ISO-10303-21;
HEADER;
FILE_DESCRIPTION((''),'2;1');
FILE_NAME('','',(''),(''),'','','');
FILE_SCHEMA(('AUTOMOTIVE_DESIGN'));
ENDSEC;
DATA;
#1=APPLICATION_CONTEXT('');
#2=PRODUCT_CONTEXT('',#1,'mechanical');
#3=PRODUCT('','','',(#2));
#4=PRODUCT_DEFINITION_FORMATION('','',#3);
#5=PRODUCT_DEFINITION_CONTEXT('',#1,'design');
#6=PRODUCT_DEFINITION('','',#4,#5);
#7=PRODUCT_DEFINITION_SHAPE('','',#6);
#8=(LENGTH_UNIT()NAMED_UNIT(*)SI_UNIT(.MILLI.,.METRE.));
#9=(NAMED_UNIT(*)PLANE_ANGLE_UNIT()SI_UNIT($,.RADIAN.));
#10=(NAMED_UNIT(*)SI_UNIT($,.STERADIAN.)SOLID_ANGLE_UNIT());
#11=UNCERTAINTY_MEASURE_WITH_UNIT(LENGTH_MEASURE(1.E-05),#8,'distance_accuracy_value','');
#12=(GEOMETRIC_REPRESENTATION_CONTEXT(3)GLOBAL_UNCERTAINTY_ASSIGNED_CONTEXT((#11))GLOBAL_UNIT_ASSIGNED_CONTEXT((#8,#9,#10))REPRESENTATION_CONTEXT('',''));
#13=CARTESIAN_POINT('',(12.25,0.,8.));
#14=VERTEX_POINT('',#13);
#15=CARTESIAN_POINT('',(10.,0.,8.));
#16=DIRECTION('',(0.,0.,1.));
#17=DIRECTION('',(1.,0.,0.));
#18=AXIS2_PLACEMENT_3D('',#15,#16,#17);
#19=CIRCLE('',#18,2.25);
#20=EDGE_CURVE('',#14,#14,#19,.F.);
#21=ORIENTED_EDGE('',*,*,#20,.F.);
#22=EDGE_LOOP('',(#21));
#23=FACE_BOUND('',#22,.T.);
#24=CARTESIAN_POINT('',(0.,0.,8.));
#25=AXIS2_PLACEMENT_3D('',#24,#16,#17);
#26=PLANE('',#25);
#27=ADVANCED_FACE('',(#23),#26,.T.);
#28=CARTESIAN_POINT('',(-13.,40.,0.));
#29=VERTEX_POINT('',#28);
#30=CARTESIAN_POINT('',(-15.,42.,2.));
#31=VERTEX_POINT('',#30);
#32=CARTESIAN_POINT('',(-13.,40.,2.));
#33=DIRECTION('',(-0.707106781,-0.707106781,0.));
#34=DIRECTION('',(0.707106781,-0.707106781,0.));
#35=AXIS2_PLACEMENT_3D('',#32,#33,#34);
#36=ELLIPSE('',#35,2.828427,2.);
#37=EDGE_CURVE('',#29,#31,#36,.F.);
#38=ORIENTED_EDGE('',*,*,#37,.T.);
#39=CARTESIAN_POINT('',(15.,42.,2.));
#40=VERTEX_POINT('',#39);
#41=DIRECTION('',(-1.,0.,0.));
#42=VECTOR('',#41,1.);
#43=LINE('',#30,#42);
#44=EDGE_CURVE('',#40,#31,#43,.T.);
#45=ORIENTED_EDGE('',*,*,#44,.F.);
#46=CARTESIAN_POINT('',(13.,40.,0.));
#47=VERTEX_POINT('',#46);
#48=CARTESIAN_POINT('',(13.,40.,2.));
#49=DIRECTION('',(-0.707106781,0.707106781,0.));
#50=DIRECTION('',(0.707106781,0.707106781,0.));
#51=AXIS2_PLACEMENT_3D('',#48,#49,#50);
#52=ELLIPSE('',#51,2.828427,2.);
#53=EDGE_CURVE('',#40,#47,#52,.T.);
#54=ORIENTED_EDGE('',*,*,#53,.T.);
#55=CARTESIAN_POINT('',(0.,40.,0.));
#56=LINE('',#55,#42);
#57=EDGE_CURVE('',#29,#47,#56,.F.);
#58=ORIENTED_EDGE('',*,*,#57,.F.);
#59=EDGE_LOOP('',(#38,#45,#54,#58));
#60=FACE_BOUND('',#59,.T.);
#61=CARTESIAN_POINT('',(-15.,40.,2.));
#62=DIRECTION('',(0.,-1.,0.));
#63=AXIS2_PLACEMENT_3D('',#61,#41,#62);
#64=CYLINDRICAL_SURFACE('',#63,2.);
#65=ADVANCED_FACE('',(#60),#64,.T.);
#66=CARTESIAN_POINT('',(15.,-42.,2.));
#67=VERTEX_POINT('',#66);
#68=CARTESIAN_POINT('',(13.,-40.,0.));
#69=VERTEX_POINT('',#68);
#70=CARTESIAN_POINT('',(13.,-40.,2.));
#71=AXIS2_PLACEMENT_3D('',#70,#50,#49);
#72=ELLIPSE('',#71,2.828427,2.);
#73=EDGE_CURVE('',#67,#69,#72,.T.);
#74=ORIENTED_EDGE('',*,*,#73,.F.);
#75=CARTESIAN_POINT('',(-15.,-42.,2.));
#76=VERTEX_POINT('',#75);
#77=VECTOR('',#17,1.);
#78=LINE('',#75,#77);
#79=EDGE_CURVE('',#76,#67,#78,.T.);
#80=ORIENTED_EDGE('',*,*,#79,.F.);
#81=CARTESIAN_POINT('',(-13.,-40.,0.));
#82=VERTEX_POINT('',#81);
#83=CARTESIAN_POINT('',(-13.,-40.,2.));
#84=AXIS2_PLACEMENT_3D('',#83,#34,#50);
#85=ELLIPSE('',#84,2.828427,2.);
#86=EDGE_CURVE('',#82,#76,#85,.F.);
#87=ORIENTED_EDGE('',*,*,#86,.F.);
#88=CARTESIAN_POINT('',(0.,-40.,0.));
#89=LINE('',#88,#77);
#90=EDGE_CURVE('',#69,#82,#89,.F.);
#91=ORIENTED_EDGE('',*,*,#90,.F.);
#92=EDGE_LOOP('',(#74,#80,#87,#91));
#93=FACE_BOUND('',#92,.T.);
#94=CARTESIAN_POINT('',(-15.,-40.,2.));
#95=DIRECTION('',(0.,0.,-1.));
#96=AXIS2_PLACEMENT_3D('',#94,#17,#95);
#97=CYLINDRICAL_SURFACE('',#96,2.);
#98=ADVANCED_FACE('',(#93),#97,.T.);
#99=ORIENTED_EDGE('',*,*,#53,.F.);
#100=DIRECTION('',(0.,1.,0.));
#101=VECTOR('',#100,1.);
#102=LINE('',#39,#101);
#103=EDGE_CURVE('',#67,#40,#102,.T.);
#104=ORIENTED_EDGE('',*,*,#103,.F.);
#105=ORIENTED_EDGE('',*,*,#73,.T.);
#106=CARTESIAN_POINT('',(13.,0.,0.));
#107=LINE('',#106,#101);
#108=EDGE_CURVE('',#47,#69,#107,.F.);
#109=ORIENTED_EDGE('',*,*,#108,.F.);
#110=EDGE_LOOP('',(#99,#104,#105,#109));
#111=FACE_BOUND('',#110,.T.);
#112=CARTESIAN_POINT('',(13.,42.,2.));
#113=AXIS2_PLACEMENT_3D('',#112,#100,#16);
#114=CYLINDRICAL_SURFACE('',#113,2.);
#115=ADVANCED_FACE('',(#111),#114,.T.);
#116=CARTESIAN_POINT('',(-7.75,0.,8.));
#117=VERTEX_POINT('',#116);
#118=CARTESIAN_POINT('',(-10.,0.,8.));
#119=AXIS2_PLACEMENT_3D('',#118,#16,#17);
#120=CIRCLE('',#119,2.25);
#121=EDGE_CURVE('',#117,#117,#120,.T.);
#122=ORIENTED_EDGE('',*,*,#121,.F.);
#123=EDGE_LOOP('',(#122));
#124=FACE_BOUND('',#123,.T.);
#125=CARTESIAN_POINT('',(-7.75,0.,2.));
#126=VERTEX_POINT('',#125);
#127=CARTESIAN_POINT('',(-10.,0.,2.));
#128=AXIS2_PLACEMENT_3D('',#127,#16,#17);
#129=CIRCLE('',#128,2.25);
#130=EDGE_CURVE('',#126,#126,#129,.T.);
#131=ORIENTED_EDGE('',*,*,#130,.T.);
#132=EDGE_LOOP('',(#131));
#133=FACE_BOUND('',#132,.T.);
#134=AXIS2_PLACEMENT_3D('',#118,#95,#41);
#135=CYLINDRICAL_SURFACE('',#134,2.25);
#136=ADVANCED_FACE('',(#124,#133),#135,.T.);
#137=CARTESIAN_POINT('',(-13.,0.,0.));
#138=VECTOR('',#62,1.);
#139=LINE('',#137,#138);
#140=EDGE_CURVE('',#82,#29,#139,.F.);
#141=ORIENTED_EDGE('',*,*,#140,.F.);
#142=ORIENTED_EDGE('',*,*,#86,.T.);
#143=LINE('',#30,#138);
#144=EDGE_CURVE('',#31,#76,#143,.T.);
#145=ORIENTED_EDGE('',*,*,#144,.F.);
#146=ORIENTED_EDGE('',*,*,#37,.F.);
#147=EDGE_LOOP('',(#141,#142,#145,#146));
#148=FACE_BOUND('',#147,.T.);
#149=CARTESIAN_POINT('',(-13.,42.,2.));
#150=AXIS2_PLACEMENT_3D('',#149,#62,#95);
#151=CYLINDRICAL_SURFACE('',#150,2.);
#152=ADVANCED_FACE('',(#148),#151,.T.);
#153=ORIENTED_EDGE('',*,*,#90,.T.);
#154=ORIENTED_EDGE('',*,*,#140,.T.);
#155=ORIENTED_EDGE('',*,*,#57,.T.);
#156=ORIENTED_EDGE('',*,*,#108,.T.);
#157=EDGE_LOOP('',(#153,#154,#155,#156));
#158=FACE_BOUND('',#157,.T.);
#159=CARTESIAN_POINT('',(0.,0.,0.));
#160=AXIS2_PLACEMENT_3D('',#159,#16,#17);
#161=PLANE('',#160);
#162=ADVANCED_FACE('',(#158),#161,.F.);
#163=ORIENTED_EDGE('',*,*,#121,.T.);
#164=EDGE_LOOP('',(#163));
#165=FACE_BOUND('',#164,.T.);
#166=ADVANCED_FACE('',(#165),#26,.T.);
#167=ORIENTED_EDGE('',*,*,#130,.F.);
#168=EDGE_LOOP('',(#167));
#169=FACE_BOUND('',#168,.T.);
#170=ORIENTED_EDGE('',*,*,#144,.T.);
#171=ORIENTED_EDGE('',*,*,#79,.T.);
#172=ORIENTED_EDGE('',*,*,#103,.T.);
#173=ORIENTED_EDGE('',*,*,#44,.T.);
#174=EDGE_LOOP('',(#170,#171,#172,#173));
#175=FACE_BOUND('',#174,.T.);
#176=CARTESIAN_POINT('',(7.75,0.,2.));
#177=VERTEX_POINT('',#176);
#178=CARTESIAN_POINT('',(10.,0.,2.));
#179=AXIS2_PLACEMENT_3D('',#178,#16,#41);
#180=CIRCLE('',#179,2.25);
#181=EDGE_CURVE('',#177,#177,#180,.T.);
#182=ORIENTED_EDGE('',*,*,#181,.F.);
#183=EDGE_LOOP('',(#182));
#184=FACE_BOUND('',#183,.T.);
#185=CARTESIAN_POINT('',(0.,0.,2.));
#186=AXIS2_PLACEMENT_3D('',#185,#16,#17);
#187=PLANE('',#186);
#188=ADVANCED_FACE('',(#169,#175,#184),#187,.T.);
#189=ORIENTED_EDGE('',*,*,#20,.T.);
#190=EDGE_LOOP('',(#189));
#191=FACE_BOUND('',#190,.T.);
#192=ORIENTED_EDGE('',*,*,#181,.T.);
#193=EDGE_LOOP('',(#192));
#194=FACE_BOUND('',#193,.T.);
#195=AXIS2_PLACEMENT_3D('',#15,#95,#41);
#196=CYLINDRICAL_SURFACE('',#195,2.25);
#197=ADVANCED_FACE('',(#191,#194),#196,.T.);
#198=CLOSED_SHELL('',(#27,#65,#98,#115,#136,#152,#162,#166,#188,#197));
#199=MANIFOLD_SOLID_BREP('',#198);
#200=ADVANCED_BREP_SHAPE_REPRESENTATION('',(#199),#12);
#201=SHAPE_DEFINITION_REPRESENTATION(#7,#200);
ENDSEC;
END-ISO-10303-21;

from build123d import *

# Parameters (mm, degrees)
SKETCH1_W           = 30
SKETCH1_H           = 84
SKETCH1_R           = 2.25
BOSS_EXTRUDE1_DEPTH = 2
SKETCH1_4_R         = 2.25
BOSS_EXTRUDE2_DEPTH = 8
FILLET1_R           = 2


with BuildPart() as part:
    # Sketch1 → Boss-Extrude1 (new body)
    with BuildSketch(Plane.XY):
        Rectangle(SKETCH1_W, SKETCH1_H)
        with Locations((-10, 0)):
            Circle(SKETCH1_R, mode=Mode.SUBTRACT)
        with Locations(Location((10, 0, 0), (0, 0, 180))):
            Circle(SKETCH1_R, mode=Mode.SUBTRACT)
    extrude(amount=BOSS_EXTRUDE1_DEPTH)

    # Sketch1<4> → Boss-Extrude2 (add)
    with BuildSketch(Plane.XY):
        with Locations((-10, 0)):
            Circle(SKETCH1_4_R)
        with Locations(Location((10, 0, 0), (0, 0, 180))):
            Circle(SKETCH1_4_R)
    extrude(amount=BOSS_EXTRUDE2_DEPTH)

    # Fillet1
    fillet1_edges = [part.edges().sort_by_distance(p)[0] for p in [
        (0, 42, 0),
        (-15, 0, 0),
        (0, -42, 0),
        (15, 0, 0),
    ]]
    fillet(fillet1_edges, radius=FILLET1_R - 0.0001)  # a hair under: the kernel refuses the full size


solid = part.part
